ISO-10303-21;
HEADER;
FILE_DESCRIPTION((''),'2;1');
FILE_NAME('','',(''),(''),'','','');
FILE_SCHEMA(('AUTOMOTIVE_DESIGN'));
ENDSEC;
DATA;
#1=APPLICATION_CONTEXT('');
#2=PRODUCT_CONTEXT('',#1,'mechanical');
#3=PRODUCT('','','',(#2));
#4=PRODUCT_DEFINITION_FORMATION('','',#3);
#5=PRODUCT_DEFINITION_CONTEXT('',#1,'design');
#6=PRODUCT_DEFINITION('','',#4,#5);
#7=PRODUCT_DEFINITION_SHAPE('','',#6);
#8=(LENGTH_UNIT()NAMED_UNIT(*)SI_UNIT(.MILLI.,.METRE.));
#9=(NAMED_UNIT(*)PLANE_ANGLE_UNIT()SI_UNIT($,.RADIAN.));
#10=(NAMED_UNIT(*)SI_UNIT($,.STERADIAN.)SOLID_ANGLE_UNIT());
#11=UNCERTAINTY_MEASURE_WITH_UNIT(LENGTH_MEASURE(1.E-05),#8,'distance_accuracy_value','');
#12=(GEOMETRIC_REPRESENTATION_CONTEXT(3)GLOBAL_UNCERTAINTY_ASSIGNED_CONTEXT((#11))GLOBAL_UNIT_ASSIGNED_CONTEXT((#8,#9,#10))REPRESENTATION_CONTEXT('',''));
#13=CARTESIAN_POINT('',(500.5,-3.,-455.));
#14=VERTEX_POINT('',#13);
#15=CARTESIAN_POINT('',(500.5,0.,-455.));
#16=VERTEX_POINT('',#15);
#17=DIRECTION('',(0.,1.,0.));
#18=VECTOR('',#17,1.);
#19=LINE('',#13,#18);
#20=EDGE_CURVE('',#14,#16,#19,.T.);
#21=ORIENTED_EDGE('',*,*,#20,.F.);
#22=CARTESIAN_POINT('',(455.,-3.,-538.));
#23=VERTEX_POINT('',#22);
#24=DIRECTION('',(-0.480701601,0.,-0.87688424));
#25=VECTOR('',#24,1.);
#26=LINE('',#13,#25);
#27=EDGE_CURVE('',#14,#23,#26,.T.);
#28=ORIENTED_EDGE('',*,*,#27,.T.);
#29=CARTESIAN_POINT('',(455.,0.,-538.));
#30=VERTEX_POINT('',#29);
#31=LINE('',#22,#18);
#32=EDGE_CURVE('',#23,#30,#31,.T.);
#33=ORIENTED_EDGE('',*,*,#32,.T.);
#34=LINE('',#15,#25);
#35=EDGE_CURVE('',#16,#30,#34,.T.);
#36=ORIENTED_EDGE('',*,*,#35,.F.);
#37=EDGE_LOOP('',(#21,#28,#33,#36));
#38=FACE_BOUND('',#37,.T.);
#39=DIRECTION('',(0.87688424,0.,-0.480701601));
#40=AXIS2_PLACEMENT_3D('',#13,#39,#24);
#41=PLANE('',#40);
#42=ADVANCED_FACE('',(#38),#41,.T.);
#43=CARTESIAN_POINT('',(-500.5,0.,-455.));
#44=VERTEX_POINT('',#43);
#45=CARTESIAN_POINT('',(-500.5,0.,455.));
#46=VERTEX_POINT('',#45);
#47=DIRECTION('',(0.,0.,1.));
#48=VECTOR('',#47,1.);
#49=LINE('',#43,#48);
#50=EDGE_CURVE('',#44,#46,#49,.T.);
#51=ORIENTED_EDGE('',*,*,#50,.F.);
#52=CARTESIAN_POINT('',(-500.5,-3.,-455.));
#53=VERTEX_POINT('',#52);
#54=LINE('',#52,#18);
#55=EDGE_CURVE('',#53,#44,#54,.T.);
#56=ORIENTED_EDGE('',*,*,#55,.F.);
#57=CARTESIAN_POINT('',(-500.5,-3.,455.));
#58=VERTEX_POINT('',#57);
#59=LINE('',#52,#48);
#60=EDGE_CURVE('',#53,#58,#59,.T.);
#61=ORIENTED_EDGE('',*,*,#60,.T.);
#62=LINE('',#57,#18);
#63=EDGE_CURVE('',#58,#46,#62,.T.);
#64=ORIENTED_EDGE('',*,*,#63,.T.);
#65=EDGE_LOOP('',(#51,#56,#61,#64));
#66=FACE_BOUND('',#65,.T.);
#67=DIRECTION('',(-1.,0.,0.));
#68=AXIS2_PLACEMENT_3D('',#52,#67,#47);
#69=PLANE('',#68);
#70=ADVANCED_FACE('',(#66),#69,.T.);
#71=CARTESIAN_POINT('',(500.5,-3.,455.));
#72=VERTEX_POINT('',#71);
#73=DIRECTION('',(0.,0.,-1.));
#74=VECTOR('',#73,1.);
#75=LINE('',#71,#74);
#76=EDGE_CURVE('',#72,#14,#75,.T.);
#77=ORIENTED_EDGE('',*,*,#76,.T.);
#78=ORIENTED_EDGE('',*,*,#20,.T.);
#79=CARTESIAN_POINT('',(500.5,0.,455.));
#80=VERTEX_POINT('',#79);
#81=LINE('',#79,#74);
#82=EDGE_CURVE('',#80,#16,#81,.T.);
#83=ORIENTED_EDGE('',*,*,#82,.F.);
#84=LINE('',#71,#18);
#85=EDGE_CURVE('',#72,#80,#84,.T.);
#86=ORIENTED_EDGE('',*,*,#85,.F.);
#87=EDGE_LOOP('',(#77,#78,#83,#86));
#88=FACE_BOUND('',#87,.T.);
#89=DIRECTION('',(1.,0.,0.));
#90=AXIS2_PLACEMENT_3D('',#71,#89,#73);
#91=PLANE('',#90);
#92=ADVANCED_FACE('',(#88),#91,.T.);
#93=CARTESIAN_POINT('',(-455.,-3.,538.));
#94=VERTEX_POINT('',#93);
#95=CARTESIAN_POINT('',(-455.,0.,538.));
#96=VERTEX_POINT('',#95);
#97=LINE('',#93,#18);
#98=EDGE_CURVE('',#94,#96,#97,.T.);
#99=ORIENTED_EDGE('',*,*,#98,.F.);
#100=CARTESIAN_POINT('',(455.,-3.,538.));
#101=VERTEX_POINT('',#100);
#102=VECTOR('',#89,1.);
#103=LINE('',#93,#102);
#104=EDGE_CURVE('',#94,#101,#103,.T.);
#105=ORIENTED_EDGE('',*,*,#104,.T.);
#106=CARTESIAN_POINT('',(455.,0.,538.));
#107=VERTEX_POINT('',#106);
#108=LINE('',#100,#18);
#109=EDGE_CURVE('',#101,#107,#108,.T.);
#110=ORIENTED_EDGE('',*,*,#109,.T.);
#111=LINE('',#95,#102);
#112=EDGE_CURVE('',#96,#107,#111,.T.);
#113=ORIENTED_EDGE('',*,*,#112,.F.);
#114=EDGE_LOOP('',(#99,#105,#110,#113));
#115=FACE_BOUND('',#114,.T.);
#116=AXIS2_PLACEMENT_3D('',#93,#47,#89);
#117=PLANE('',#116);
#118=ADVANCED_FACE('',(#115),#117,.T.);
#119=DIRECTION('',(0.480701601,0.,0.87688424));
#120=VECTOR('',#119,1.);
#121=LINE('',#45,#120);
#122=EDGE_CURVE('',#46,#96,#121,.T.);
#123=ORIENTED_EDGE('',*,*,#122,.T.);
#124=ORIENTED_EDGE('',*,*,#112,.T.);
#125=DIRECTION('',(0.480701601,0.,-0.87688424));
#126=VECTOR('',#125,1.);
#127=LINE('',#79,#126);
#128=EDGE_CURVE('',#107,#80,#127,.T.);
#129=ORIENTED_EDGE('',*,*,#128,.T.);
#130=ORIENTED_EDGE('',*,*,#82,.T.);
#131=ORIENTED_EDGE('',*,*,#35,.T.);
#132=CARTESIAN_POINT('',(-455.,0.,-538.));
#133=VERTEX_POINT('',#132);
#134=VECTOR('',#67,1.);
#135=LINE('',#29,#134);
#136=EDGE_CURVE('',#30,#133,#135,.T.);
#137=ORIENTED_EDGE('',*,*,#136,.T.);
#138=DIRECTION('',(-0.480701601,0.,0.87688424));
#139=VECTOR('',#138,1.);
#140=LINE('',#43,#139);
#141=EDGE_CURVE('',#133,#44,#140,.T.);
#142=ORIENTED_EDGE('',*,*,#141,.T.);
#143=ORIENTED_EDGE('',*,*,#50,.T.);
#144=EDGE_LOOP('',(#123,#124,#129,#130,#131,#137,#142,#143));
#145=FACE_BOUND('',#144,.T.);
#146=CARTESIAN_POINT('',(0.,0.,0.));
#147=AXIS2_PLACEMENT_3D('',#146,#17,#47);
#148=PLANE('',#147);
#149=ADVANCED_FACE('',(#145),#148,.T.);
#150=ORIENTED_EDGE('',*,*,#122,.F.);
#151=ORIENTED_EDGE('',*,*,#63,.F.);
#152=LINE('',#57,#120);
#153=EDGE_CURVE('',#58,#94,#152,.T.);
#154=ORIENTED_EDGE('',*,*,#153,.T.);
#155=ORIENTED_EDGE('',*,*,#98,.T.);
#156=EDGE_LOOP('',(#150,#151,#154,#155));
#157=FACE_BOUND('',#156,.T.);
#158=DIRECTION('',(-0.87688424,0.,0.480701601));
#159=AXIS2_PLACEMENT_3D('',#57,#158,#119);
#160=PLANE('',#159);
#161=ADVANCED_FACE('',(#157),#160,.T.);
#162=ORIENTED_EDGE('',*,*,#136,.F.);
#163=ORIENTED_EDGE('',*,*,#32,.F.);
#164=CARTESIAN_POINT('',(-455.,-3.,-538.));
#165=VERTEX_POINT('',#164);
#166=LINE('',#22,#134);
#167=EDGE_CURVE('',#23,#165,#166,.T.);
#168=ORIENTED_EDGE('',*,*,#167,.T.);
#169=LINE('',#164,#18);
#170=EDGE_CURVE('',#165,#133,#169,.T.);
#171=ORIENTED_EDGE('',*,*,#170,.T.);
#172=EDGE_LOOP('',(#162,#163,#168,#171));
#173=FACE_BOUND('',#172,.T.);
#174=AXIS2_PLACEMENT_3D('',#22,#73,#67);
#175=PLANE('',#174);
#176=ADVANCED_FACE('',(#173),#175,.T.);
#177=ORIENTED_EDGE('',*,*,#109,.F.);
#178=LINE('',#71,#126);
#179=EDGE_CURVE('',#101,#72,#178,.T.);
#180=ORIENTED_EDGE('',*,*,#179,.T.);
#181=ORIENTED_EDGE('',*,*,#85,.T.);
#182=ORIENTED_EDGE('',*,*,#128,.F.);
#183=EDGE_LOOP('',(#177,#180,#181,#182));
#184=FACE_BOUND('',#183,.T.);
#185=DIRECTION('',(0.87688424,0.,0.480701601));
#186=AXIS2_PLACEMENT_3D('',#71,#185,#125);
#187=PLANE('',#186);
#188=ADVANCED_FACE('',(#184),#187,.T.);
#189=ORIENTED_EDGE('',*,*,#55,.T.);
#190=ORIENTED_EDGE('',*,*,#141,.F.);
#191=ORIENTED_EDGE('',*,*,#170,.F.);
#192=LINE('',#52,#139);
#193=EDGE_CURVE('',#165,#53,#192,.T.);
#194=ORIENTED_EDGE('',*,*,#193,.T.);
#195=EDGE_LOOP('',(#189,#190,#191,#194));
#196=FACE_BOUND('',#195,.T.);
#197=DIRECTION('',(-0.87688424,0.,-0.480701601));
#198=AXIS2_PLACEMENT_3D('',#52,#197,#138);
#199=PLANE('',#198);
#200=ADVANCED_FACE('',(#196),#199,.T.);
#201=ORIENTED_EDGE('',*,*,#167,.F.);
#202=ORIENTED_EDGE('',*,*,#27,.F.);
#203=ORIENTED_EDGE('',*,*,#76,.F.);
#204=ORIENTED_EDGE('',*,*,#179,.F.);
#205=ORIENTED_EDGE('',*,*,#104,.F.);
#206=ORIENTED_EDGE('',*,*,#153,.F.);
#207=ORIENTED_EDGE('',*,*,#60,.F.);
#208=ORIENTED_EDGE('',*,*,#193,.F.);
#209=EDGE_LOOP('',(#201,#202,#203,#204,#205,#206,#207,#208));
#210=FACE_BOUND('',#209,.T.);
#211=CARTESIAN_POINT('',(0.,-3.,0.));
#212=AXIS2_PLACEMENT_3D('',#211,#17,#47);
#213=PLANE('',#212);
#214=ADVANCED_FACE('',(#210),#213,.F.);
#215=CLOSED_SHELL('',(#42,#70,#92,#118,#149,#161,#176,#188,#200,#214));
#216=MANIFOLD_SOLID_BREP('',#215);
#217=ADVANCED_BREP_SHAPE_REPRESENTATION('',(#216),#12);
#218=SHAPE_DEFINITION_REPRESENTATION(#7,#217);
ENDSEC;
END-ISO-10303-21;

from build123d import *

# Parameters (mm, degrees)
SM_BASE_FLANGE_1_DEPTH = 3


# Sheet-metal steps are written as plain solids
with BuildPart() as part:
    # Sketch 1 → Базовая кромка1 (new body)
    with BuildSketch(Plane(origin=(0, 0, 0), x_dir=(1, 0, 0), z_dir=(0, 1, 0))):
        Polygon((-500.5, 455), (-455, 538), (455, 538), (500.5, 455), (500.5, -455), (455, -538), (-455, -538), (-500.5, -455), align=None)
    extrude(amount=-SM_BASE_FLANGE_1_DEPTH)


solid = part.part
